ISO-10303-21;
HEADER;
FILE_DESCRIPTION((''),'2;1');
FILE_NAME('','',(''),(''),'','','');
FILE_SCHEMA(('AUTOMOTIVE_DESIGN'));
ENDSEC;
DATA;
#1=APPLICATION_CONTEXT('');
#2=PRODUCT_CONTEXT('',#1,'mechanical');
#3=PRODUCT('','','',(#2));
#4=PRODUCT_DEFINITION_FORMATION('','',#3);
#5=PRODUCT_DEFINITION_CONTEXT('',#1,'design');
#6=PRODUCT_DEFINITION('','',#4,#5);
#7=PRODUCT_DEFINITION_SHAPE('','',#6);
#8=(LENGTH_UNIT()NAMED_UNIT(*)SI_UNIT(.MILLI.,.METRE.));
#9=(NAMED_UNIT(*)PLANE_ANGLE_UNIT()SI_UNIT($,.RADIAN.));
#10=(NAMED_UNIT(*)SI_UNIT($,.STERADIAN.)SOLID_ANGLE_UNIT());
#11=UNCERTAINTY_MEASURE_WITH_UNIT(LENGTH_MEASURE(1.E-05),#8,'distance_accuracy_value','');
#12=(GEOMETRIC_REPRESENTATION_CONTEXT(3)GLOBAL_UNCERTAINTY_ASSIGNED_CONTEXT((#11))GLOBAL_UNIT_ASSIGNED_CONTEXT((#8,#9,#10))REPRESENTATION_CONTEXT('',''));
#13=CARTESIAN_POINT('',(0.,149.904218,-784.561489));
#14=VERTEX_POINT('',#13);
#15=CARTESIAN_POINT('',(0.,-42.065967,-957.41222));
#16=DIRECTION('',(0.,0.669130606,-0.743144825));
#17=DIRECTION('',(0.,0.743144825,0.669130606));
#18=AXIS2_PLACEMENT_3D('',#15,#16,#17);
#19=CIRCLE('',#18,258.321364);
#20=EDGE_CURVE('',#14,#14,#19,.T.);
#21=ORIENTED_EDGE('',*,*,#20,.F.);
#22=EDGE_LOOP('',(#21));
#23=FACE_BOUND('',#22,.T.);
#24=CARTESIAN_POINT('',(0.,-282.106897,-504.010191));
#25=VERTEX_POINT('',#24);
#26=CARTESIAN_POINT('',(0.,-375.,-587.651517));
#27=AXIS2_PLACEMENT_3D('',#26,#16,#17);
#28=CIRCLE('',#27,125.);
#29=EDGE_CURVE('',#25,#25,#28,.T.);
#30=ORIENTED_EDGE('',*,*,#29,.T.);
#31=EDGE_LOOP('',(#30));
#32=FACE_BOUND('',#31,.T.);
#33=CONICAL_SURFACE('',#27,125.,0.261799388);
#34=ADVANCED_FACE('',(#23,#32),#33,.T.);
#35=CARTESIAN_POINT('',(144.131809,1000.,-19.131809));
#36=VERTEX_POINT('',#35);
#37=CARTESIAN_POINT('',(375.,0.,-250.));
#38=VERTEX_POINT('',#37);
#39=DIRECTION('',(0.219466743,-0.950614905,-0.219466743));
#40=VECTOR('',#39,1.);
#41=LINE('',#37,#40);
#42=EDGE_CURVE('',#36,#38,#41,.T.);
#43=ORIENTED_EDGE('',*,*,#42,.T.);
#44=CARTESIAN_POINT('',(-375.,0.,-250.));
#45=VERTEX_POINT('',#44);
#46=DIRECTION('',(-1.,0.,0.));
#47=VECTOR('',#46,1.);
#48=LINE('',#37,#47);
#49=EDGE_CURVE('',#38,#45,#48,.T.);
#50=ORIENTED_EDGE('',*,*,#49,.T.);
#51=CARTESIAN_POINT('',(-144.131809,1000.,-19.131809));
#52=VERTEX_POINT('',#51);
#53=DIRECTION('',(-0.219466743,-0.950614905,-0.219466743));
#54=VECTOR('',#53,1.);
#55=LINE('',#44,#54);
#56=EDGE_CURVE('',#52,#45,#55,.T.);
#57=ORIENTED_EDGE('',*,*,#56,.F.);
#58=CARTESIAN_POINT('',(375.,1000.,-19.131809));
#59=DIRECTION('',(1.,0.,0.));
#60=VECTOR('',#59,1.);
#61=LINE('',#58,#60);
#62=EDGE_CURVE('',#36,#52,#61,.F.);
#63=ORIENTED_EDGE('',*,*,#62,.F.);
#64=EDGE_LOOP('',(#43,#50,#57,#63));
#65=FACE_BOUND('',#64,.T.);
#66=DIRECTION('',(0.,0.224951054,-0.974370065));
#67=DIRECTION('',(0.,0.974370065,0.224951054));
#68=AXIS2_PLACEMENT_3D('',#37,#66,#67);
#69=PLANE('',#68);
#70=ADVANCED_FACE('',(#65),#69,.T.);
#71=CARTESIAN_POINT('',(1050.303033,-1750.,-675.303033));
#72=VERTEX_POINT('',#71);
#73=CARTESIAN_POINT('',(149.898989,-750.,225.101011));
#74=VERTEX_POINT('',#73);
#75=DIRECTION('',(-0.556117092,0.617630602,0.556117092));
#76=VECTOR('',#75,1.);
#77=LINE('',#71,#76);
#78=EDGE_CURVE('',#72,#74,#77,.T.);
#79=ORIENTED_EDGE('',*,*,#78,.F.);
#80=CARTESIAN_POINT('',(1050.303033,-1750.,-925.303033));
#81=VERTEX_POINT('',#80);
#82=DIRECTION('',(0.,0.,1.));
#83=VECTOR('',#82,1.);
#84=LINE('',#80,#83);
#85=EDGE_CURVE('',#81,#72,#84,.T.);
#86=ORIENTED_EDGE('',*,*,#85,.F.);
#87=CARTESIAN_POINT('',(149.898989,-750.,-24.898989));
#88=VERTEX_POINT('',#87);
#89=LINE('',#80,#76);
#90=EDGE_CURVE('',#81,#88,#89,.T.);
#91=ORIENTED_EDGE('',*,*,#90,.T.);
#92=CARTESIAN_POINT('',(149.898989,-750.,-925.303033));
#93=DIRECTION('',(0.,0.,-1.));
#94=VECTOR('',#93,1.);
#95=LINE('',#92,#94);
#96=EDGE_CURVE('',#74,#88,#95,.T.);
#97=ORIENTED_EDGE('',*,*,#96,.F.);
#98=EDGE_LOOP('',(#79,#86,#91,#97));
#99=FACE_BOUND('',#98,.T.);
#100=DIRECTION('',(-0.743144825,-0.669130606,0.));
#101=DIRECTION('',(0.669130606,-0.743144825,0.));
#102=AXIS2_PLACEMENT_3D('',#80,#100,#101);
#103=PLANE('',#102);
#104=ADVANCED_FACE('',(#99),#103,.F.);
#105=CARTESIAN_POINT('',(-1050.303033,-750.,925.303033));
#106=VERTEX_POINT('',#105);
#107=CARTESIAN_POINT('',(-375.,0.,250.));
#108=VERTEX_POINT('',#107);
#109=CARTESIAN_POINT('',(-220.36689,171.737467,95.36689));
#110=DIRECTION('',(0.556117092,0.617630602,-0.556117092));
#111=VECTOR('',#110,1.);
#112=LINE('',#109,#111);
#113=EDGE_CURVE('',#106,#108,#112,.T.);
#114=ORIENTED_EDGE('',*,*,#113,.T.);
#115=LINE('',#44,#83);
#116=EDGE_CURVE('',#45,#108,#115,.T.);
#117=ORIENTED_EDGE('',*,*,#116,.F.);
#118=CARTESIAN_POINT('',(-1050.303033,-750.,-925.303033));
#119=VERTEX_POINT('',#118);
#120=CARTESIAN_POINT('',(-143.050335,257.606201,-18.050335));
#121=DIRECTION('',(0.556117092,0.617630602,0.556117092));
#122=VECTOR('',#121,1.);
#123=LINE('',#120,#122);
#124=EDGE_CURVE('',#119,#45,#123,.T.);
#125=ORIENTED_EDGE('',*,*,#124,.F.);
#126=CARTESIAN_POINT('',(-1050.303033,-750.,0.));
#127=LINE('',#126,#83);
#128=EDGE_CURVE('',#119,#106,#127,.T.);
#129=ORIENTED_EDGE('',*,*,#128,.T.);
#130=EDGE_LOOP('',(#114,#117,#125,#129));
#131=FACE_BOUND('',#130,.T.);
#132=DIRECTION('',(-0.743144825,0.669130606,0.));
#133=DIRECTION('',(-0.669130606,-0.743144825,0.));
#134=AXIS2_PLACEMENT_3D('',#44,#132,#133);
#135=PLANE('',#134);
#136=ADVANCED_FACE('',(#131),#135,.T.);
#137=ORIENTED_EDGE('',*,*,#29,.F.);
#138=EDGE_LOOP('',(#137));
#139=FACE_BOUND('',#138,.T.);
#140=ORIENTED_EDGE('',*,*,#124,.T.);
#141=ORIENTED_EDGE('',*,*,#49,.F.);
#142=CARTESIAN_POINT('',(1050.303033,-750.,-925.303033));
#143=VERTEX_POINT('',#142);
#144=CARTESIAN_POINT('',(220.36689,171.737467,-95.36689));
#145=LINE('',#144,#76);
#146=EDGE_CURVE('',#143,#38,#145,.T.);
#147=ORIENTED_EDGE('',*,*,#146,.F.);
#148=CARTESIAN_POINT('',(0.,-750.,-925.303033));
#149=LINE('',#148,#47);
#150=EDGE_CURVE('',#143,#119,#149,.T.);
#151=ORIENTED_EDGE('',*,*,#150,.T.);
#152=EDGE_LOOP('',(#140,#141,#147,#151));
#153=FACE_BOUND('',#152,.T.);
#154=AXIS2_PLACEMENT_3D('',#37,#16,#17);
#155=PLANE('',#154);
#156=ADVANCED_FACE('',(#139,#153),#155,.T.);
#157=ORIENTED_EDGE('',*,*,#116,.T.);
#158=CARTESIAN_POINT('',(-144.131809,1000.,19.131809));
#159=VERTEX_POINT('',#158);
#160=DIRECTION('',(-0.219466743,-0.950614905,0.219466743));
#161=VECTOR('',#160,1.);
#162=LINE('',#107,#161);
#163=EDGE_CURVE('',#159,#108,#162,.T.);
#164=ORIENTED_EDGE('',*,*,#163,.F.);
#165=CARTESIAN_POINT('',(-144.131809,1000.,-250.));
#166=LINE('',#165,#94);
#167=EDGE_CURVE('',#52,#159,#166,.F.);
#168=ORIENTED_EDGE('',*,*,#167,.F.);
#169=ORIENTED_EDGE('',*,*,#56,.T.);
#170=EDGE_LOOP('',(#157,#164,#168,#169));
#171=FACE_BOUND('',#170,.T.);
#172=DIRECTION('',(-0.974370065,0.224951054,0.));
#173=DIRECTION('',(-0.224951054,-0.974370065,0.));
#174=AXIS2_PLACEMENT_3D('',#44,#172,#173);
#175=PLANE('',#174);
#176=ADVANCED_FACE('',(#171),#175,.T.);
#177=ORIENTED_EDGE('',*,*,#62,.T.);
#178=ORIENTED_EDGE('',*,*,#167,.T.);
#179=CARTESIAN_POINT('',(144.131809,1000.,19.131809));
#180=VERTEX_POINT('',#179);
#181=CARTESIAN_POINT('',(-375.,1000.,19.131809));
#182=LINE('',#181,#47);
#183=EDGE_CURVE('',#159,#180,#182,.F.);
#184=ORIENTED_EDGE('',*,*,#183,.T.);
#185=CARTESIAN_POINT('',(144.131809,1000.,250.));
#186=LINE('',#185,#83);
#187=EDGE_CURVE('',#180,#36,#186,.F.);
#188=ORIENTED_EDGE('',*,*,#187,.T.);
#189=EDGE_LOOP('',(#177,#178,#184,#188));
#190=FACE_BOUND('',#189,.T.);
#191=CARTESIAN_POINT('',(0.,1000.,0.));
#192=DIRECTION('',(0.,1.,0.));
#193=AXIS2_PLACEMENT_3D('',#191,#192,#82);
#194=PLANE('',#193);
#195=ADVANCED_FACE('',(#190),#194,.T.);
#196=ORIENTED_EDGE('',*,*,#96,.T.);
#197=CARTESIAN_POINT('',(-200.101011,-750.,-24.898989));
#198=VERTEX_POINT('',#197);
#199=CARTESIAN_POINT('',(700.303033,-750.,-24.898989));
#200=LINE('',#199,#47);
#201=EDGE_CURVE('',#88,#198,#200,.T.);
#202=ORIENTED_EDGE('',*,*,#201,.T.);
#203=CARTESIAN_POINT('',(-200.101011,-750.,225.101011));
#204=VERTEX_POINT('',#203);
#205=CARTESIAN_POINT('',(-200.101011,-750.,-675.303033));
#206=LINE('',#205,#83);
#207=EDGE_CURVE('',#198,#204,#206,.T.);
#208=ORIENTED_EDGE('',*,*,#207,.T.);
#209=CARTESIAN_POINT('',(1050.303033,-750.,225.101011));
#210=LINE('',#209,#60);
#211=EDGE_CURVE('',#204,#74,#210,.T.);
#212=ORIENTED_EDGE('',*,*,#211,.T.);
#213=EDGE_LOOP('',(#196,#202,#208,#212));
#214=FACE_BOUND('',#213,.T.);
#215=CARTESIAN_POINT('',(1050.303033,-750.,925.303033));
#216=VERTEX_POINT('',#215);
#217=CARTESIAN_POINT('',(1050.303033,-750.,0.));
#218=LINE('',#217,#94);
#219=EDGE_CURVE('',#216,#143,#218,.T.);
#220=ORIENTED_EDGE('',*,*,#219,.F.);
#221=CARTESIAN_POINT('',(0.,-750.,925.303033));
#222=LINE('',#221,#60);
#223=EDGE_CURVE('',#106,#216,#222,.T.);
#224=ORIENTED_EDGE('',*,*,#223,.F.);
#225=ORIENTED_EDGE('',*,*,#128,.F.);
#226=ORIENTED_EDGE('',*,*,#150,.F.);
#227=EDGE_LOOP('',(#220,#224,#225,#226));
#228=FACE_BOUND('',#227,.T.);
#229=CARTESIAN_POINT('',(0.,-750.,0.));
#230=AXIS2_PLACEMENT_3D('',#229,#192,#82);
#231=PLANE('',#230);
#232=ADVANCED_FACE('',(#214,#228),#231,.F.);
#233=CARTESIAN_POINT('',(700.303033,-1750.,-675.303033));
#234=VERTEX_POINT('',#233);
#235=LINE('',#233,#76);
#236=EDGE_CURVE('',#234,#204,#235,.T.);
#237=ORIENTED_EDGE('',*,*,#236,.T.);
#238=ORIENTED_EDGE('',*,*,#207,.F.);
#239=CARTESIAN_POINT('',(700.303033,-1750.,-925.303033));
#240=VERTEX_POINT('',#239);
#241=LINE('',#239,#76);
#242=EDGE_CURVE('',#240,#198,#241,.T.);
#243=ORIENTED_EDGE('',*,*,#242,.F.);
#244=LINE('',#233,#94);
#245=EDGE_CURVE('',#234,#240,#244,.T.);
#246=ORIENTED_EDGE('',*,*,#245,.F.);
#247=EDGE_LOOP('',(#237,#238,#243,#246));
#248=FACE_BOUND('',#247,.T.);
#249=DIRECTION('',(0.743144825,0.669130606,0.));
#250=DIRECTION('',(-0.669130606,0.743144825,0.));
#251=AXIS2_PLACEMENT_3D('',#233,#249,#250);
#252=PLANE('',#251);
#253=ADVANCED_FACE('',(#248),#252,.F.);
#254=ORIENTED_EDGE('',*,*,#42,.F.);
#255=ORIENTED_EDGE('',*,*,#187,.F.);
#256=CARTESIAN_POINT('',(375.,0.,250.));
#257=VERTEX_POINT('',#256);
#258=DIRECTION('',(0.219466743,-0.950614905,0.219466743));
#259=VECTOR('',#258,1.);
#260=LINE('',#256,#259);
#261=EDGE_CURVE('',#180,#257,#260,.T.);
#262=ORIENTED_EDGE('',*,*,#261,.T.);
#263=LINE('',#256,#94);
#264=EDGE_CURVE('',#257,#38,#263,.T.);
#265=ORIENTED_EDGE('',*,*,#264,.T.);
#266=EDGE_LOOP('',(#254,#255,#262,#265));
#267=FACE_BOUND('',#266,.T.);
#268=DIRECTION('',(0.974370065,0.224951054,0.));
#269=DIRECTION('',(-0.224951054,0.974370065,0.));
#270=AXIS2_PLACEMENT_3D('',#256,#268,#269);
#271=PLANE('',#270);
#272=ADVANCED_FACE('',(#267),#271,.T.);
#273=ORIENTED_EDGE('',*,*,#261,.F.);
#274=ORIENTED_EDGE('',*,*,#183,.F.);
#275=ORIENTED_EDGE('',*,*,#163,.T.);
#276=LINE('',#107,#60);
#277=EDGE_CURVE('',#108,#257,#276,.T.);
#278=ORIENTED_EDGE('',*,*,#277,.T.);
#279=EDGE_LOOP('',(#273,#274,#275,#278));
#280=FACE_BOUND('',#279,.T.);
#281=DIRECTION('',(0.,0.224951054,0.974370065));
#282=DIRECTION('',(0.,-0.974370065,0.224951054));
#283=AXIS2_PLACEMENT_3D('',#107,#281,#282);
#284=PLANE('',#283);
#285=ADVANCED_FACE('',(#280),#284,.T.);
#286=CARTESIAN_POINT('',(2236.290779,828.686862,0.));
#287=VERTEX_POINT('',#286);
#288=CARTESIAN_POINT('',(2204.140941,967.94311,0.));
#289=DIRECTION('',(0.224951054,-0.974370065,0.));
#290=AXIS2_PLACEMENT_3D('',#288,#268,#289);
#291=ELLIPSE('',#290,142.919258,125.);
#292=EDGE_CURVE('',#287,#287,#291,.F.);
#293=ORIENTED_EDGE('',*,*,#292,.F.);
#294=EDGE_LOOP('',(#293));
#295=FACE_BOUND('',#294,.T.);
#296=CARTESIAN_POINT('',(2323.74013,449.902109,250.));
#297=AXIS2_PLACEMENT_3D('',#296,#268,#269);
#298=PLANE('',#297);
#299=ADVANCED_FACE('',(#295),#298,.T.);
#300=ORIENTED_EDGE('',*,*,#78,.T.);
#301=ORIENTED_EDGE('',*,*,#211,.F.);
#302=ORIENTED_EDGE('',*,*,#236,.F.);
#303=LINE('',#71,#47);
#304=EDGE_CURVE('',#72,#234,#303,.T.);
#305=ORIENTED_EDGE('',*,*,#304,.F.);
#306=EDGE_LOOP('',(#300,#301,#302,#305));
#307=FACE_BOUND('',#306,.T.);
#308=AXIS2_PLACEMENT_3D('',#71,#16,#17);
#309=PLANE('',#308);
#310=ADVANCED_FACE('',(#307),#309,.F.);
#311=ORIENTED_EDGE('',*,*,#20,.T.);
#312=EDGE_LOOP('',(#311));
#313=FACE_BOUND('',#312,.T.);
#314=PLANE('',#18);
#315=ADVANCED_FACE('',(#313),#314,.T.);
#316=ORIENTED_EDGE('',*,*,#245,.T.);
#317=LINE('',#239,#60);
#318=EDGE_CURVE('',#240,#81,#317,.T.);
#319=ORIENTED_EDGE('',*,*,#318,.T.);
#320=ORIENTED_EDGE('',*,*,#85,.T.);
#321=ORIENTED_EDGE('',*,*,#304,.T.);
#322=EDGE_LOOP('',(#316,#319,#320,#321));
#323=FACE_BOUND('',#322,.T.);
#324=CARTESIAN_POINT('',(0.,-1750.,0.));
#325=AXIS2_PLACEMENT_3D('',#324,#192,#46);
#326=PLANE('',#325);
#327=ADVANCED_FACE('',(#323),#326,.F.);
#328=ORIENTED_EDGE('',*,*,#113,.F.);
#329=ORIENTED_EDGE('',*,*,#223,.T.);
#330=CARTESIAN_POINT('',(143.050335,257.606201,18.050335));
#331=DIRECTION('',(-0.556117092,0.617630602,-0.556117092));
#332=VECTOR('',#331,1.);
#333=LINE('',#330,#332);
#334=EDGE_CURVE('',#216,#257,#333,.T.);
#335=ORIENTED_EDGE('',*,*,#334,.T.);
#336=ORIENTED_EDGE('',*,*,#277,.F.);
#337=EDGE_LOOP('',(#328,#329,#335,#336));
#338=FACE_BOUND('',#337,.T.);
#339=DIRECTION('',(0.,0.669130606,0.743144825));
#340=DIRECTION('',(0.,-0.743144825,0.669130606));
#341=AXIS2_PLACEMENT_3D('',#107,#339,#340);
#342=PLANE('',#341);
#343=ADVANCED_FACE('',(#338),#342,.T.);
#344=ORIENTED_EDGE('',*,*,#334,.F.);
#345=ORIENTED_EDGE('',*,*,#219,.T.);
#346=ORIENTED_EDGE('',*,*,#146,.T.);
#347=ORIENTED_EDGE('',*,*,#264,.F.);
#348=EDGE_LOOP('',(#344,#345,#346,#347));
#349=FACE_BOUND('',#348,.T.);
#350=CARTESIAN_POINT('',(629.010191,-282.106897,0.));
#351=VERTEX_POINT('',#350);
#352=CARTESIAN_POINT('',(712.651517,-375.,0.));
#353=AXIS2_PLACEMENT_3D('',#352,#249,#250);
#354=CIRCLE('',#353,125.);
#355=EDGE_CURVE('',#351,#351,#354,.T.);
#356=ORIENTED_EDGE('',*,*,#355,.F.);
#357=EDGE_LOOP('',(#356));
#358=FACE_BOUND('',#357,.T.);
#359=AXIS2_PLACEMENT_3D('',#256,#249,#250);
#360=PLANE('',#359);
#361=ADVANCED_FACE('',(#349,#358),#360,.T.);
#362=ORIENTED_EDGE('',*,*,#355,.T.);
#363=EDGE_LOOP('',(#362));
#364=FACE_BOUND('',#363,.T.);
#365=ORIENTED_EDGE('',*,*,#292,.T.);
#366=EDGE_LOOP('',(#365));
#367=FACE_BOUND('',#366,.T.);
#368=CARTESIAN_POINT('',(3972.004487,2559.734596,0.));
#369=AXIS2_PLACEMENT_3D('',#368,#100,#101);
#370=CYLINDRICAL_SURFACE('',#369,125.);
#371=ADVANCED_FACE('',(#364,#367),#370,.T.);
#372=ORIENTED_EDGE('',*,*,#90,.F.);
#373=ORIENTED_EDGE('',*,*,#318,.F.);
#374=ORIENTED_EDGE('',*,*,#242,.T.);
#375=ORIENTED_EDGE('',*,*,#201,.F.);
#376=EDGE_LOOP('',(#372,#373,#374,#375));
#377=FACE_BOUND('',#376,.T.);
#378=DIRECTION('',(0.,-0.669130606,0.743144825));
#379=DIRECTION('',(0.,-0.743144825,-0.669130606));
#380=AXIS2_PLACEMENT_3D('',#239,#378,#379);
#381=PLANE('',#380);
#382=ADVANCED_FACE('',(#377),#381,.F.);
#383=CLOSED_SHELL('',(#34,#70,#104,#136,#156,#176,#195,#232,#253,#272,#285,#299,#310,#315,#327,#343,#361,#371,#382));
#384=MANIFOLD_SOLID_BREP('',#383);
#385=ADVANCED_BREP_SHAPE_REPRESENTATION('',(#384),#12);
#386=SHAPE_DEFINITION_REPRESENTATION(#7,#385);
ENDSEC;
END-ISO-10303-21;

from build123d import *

# Parameters (mm, degrees)
CROQUIS1_W                        = 750
CROQUIS1_H                        = 500
SALIENTE_EXTRUIR1_DEPTH           = 1000
SALIENTE_EXTRUIR1_TAPER           = 13
SALIENTE_EXTRUIR1_OTHER_WAY_DEPTH = 750
SALIENTE_EXTRUIR1_OTHER_WAY_TAPER = -42
CROQUIS3_R                        = 125
SALIENTE_EXTRUIR3_DEPTH           = 497.562106
SALIENTE_EXTRUIR3_DRAFT           = -15
SALIENTE_EXTRUIR4_REACH           = 2572.697
CROQUIS4_R                        = 125


with BuildPart() as part:
    # Croquis1 → Saliente-Extruir1 (new body)
    with BuildSketch(Plane(origin=(0, 0, 0), x_dir=(1, 0, 0), z_dir=(0, 1, 0))):
        Rectangle(CROQUIS1_W, CROQUIS1_H)
    extrude(amount=SALIENTE_EXTRUIR1_DEPTH, taper=SALIENTE_EXTRUIR1_TAPER)

    # Croquis1 → Saliente-Extruir1 other way (add)
    with BuildSketch(Plane(origin=(0, 0, 0), x_dir=(1, 0, 0), z_dir=(0, 1, 0))):
        Rectangle(CROQUIS1_W, CROQUIS1_H)
    extrude(amount=-SALIENTE_EXTRUIR1_OTHER_WAY_DEPTH, taper=SALIENTE_EXTRUIR1_OTHER_WAY_TAPER)

    # Saliente-Extruir2: read off the stored shape, not the designer's step
    # Saliente-Extruir2: loft between two sections, ruled curve by curve
    saliente_extruir2_from = [
        Edge.make_line((1050.303033223, -1750, -925.303033223), (700.303033223, -1750, -925.303033223)),
        Edge.make_line((1050.303033223, -1750, -675.303033223), (1050.303033223, -1750, -925.303033223)),
        Edge.make_line((700.303033223, -1750, -675.303033223), (1050.303033223, -1750, -675.303033223)),
        Edge.make_line((700.303033223, -1750, -925.303033223), (700.303033223, -1750, -675.303033223)),
    ]
    saliente_extruir2_to = [
        Edge.make_line((149.898988926, -750, -24.898988926), (-200.101011074, -750, -24.898988926)),
        Edge.make_line((149.898988926, -750, 225.101011074), (149.898988926, -750, -24.898988926)),
        Edge.make_line((-200.101011074, -750, 225.101011074), (149.898988926, -750, 225.101011074)),
        Edge.make_line((-200.101011074, -750, -24.898988926), (-200.101011074, -750, 225.101011074)),
    ]
    saliente_extruir2 = Solid(Shell([*[Face.make_surface_from_curves(saliente_extruir2_from[k], saliente_extruir2_to[k]) for k in range(4)], Face(Wire(saliente_extruir2_from)), Face(Wire(saliente_extruir2_to))]))
    add(saliente_extruir2)


with BuildPart() as saliente_extruir3_tool:
    # Croquis3 → Saliente-Extruir3 (with draft: the straight prism first)
    with BuildSketch(Plane(origin=(0, 124.315236921, -138.066057908), x_dir=(-1, 0, 0), z_dir=(0, 0.6691306063588595, -0.7431448254773932))):
        with Locations((0, -671.894925192)):
            Circle(CROQUIS3_R)
    extrude(amount=SALIENTE_EXTRUIR3_DEPTH)
    # Saliente-Extruir3: the draft: its side faces are tilted about the plane it starts from
    saliente_extruir3_sides = [saliente_extruir3_tool.faces().sort_by_distance(p)[0] for p in [
        (125, -208.532983156, -772.531868825),
    ]]
    draft(saliente_extruir3_sides, Plane(origin=(0, 124.315236921, -138.066057908), x_dir=(-1, 0, 0), z_dir=(0, 0.6691306063588595, -0.7431448254773932)), SALIENTE_EXTRUIR3_DRAFT)


with BuildPart() as part_1:
    add(part.part)

    # Saliente-Extruir3: add saliente_extruir3_tool
    add(saliente_extruir3_tool.part)

    # Saliente-Extruir4: up to this plane
    saliente_extruir4_end = Plane(origin=(2323.74012957, 449.902108688, 250), z_dir=(0.9743700647852351, 0.2249510543438655, 0))
    # Croquis4 → Saliente-Extruir4 (add, up to the surface)
    with BuildSketch(Plane(origin=(207.099086863, 186.472855382, 0), x_dir=(0, 0, -1), z_dir=(0.7431448254773932, 0.6691306063588595, 0)), mode=Mode.PRIVATE) as saliente_extruir4_sk1:
        with Locations(Location((0, -755.536250987, 0), (0, 0, 270))):
            Circle(CROQUIS4_R)
    saliente_extruir4_tool1 = split(extrude(saliente_extruir4_sk1.sketch, amount=SALIENTE_EXTRUIR4_REACH, mode=Mode.PRIVATE), bisect_by=saliente_extruir4_end, keep=Keep.BOTH, mode=Mode.PRIVATE)
    add(saliente_extruir4_tool1.solids().sort_by_distance((712.651517, -375, 0))[0])


solid = part_1.part
